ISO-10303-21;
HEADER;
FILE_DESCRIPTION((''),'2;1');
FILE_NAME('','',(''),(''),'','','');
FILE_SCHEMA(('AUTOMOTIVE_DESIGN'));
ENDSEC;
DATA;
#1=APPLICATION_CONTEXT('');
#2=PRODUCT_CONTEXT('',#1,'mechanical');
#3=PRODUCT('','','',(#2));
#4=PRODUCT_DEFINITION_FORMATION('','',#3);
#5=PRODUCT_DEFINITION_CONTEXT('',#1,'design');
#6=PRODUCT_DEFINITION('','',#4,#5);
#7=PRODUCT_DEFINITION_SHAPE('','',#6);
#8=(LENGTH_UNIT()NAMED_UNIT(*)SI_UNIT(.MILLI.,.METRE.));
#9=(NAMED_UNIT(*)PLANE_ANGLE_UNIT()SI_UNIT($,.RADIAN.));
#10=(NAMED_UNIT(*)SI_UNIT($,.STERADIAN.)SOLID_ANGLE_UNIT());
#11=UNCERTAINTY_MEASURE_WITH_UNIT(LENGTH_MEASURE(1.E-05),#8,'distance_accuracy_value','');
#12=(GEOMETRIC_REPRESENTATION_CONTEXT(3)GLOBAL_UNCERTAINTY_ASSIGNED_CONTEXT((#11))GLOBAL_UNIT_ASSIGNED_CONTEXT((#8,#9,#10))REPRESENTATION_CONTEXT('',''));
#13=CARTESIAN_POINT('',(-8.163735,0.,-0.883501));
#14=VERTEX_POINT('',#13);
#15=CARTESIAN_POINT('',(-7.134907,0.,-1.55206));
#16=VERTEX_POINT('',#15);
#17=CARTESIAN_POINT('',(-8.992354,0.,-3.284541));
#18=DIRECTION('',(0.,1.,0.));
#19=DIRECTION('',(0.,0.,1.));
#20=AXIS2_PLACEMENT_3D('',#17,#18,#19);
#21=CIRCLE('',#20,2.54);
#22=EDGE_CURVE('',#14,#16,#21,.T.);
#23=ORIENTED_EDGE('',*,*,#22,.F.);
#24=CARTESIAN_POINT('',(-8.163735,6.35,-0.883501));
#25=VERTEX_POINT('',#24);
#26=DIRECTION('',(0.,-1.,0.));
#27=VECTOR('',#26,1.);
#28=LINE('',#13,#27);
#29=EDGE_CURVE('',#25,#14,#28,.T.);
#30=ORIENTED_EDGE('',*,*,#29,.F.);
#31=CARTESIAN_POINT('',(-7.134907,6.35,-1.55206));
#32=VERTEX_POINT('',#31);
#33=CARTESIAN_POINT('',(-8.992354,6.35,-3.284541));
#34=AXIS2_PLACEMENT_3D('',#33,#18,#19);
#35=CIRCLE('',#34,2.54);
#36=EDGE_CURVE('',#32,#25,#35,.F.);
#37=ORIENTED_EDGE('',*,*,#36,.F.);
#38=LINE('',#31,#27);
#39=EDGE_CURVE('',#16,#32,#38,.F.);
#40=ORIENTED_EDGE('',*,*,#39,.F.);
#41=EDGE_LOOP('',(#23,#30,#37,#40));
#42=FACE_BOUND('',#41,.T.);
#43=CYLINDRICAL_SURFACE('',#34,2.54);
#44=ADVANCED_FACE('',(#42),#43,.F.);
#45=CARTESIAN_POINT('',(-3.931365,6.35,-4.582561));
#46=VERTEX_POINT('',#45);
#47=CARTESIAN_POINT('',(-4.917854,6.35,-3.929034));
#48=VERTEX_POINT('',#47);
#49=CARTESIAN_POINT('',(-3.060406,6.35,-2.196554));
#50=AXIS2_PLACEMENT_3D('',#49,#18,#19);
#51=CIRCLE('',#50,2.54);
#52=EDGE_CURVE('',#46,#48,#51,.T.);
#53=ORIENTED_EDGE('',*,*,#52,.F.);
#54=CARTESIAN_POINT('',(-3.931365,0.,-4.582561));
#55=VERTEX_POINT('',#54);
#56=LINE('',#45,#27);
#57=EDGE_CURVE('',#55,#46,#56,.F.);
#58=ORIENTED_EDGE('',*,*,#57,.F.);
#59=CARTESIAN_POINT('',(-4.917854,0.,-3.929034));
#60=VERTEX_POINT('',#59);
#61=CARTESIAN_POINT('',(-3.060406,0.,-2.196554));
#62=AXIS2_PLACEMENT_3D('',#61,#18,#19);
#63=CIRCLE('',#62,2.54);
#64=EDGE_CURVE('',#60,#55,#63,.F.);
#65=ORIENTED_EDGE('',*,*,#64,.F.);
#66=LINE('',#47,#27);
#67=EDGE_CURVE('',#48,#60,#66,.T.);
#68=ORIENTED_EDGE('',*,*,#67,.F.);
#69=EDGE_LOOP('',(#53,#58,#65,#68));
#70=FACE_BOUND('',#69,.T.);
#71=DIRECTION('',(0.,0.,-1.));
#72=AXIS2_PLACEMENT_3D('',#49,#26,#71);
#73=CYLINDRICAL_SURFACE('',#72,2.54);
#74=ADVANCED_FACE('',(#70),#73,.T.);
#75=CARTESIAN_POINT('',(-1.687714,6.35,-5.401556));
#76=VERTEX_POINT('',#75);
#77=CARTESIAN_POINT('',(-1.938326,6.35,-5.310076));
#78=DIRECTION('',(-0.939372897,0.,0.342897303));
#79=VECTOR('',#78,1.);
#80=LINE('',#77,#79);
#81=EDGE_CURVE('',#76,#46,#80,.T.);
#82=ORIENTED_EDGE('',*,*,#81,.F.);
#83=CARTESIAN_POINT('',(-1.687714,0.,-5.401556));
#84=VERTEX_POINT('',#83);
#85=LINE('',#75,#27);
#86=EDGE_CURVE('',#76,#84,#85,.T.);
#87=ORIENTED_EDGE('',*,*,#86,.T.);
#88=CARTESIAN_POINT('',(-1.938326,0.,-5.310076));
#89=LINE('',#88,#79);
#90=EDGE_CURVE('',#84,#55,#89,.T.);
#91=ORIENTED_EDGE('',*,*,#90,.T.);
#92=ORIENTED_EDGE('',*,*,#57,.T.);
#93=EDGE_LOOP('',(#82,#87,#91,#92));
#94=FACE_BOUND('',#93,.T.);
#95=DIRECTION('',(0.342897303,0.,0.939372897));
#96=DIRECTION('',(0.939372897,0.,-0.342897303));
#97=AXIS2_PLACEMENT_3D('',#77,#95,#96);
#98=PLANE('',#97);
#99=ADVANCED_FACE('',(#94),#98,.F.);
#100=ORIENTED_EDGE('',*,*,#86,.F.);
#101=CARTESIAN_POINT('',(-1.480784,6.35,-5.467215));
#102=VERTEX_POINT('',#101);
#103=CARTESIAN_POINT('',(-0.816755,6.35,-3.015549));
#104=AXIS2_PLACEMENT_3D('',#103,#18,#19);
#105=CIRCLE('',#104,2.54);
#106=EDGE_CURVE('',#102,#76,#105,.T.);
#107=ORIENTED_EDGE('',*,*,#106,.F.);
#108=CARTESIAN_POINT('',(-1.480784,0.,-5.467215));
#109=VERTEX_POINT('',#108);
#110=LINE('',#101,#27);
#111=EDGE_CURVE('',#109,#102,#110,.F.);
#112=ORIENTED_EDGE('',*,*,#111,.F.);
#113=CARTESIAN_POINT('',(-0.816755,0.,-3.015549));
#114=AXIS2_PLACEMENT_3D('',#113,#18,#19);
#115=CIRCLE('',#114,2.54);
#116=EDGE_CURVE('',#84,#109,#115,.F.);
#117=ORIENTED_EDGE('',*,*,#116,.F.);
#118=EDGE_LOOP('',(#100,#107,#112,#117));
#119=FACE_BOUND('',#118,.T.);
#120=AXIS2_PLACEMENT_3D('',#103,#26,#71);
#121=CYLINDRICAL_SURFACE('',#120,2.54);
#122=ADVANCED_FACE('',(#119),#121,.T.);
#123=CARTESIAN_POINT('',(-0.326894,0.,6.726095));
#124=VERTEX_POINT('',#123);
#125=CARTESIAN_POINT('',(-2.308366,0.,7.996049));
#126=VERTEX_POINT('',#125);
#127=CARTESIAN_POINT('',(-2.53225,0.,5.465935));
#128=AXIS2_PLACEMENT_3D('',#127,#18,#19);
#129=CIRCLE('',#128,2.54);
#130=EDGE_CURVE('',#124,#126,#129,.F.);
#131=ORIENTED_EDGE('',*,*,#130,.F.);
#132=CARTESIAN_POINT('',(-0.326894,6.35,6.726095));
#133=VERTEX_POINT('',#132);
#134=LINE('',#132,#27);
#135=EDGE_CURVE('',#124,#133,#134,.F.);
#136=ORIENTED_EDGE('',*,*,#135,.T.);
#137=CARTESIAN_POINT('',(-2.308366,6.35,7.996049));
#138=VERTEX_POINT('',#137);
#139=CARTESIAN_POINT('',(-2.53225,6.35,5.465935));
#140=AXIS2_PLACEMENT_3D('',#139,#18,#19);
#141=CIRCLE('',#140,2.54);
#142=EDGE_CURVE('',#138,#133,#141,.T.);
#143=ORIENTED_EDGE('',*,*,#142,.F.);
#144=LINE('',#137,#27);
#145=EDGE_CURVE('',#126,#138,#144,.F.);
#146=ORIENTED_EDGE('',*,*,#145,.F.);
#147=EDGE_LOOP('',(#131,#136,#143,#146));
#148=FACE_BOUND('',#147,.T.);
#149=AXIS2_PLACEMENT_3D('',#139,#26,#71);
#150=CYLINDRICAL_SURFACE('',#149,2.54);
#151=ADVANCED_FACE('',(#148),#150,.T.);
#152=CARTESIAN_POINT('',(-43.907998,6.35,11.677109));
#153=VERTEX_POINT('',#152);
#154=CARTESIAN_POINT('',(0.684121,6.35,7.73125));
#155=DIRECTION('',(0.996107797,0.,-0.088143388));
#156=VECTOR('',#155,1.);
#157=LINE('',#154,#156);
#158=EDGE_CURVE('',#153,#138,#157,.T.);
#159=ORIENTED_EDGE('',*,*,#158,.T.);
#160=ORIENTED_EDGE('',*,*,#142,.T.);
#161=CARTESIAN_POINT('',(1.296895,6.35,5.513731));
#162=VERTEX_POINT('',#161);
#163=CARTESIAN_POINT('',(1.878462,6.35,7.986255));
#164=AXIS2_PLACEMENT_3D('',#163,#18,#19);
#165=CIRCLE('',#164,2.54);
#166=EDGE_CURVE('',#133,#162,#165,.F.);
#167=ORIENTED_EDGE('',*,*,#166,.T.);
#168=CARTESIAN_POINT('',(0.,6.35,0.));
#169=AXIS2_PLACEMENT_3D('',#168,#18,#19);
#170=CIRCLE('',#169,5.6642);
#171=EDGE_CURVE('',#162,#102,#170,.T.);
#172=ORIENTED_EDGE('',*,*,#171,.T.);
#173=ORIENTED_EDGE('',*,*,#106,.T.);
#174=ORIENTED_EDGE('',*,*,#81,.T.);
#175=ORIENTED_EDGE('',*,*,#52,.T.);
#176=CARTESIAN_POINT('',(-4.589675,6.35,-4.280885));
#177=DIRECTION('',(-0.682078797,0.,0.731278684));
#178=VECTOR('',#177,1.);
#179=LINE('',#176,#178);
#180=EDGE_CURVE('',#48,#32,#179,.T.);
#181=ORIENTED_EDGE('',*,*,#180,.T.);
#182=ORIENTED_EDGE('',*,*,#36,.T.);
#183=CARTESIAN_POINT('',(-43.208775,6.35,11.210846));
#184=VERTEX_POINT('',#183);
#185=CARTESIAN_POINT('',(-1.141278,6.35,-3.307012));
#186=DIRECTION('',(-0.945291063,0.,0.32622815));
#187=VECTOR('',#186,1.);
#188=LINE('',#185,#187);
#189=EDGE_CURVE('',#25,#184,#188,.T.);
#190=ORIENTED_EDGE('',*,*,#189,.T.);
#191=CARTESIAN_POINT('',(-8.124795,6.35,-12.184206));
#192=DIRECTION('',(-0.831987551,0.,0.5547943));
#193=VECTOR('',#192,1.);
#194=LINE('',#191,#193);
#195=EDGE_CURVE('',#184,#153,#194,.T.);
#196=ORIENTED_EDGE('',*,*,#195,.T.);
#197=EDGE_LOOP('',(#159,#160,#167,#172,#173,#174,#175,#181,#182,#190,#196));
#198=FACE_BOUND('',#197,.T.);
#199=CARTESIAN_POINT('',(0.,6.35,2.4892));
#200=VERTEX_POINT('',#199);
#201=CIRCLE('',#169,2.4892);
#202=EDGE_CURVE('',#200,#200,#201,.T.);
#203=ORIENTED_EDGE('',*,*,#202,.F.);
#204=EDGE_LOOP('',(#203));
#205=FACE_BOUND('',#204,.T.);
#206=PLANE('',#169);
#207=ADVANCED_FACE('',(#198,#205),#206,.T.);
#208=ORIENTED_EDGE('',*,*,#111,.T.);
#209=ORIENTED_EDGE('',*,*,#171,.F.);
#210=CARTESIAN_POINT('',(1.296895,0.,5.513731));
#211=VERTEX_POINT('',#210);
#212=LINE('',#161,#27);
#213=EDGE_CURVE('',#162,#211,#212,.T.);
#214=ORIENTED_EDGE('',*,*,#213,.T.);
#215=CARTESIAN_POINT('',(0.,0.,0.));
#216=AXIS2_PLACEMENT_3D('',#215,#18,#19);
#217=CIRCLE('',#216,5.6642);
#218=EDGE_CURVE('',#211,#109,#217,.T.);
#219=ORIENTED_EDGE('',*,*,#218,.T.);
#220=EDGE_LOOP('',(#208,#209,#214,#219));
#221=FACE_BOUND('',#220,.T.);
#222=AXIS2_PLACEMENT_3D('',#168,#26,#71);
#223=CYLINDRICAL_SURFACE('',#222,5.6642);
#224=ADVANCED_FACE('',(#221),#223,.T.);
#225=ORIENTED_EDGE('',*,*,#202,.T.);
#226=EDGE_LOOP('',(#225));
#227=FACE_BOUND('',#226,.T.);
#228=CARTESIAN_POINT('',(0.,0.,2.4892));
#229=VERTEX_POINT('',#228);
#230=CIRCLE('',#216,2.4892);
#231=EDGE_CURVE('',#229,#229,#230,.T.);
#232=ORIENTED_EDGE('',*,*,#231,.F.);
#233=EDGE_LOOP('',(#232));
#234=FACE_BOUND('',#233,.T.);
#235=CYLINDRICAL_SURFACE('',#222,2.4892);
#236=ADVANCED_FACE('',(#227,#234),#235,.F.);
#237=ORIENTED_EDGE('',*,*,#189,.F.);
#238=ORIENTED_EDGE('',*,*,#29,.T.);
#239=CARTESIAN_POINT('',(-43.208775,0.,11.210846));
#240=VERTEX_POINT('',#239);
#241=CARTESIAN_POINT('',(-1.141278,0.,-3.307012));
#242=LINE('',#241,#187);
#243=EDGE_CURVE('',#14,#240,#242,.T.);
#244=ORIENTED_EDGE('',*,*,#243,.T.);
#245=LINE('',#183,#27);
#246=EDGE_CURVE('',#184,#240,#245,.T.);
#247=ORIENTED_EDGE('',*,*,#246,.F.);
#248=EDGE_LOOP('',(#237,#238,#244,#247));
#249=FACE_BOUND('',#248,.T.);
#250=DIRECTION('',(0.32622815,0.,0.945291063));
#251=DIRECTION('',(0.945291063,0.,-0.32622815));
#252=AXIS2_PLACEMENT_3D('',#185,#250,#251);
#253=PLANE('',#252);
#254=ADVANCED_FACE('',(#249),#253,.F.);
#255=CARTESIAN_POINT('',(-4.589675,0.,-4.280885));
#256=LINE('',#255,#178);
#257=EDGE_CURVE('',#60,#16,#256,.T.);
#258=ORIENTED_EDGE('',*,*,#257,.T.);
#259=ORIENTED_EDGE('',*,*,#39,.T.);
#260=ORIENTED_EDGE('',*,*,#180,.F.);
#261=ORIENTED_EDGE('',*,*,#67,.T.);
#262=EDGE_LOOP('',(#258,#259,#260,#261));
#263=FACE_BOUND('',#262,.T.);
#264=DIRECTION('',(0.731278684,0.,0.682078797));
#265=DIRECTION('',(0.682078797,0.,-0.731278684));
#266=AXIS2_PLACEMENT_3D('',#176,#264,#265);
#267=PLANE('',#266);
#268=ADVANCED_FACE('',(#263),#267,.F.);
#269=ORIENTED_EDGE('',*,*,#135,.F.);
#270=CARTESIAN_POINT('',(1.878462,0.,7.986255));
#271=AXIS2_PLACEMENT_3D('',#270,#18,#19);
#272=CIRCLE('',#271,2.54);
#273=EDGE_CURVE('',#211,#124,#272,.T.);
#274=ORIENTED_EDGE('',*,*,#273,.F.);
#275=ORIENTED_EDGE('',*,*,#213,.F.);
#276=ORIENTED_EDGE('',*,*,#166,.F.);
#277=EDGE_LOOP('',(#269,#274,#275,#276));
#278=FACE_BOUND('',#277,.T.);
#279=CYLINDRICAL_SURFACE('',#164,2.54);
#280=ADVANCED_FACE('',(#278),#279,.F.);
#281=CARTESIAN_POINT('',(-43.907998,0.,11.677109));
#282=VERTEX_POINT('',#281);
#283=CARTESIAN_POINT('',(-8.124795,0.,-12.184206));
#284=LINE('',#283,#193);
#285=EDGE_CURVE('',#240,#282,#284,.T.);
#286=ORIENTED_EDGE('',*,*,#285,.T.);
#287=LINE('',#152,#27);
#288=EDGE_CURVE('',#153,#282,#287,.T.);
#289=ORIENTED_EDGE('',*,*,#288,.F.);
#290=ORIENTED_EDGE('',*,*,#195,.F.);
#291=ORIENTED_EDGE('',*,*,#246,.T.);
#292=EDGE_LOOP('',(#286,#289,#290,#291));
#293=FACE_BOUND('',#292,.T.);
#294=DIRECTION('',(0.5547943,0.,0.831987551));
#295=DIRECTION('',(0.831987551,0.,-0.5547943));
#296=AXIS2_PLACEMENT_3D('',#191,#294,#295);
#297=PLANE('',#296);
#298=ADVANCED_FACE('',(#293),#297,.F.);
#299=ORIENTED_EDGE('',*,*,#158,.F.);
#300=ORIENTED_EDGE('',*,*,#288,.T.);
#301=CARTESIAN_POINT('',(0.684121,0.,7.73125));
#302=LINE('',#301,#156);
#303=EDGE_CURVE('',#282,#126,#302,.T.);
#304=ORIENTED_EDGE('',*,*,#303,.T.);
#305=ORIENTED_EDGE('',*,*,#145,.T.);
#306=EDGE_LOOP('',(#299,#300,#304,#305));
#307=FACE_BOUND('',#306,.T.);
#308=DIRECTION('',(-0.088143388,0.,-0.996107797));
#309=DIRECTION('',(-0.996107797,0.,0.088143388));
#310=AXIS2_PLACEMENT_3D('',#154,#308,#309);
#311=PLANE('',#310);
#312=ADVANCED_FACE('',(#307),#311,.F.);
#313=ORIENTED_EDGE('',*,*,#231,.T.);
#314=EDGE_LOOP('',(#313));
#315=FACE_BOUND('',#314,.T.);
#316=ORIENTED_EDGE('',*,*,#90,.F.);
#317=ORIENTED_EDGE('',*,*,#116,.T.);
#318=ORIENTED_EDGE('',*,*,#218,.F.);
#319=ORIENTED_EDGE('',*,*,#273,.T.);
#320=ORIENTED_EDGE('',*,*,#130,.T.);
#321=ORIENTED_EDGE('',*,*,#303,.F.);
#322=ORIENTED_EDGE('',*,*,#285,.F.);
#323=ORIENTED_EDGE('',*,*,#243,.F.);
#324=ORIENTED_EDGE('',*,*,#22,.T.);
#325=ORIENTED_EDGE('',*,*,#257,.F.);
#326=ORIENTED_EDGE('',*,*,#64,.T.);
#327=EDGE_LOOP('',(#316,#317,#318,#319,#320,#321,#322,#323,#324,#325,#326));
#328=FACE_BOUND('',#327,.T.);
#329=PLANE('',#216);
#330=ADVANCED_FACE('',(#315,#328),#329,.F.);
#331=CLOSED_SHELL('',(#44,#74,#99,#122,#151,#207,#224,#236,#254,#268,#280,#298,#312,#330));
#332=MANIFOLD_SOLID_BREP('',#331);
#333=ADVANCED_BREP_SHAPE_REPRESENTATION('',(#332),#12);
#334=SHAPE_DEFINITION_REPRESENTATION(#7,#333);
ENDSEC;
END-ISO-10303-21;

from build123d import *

# Parameters (mm, degrees)
SKETCH1_R           = 2.4892
BOSS_EXTRUDE1_DEPTH = 6.35
FILLET1_R           = 2.54
FILLET2_R           = 2.54


with BuildPart() as part:
    # Sketch1 → Boss-Extrude1 (new body)
    with BuildSketch(Plane(origin=(0, 0, 0), x_dir=(1, 0, 0), z_dir=(0, 1, 0))):
        with BuildLine():
            Line((-1.600744285, 5.433302805), (-4.502878037, 4.373943057))
            Line((-4.502878037, 4.373943057), (-7.566118931, 1.089743665))
            Line((-7.566118931, 1.089743665), (-43.208775226, -11.210846355))
            Line((-43.208775226, -11.210846355), (-43.907997659, -11.677108885))
            Line((-43.907997659, -11.677108885), (0, -7.791786745))
            Line((0, -7.791786745), (0, -5.6642))
            ThreePointArc((0, -5.6642), (5.606178529, 0.808655641), (-1.600744285, 5.433302805))
        make_face()
        with Locations(Location((0, 0, 0), (0, 0, 270))):
            Circle(SKETCH1_R, mode=Mode.SUBTRACT)
    extrude(amount=BOSS_EXTRUDE1_DEPTH)

    # Fillet1
    # the kernel refuses this fillet: 2.54 mm, written as the material it adds along each edge
    with BuildSketch(Plane(origin=(-7.566118931, 0, -1.089743665), x_dir=(0.6820787973115132, 0, -0.7312786844001947), z_dir=(0, 1, 0))) as fillet1_piece_1:
        with BuildLine():
            CenterArc((FILLET1_R * 0.248898879334, FILLET1_R), FILLET1_R, 242.04630063, 27.95369937)
            Line((-FILLET1_R * 0.219859021674, FILLET1_R * 0.11667331624), (0, 0))
            Line((0, 0), (FILLET1_R * 0.248898879334, 0))
        make_face()
    extrude(amount=6.35)
    # the kernel refuses this fillet: 2.54 mm, written as the material it takes off along each edge
    with BuildSketch(Plane(origin=(0, -5.793464316, 7.791786745), x_dir=(0, 0, -1), z_dir=(0, 1, 0))) as fillet1_2_piece_1:
        with BuildLine():
            CenterArc((2.325851575, 2.532250196), FILLET1_R, 185.056806539, 80.466301584)
            Line((-0.204262229, 2.308365991), (0, 0))
            Line((0, 0), (2.127586745, 0))
        make_face()
    extrude(amount=17.936928632, mode=Mode.SUBTRACT)
    with BuildSketch(Plane(origin=(-1.600744285, -0.311653756, -5.433302805), x_dir=(-0.9393728970341759, 0, 0.34289730287306086), z_dir=(0, 1, 0))) as fillet1_2_piece_2:
        with BuildLine():
            CenterArc((0.092583262, 2.54), FILLET1_R, 265.101357171, 4.898642829)
            ThreePointArc((-0.124315777, 0.009277809), (-0.062183413, 0.004296891), (0, 0))
            Line((0, 0), (0.092583262, 0))
        make_face()
    extrude(amount=6.973307511, mode=Mode.SUBTRACT)
    with BuildSketch(Plane(origin=(-4.502878037, -1.520996143, -4.373943057), x_dir=(0.9393728970341768, 0, -0.34289730287305803), z_dir=(0, 1, 0))) as fillet1_2_piece_3:
        with BuildLine():
            CenterArc((FILLET1_R * 0.239526951609, -FILLET1_R), FILLET1_R, 90, 26.940206001)
            Line((-FILLET1_R * 0.213533444751, -FILLET1_R * 0.108520175635), (0, 0))
            Line((0, 0), (FILLET1_R * 0.239526951609, 0))
        make_face()
    extrude(amount=9.391992285, mode=Mode.SUBTRACT)

    # Fillet2
    fillet2_edges = [part.edges().sort_by_distance(p)[0] for p in [
        (0, 3.175, 5.6642),
    ]]
    fillet(fillet2_edges, radius=FILLET2_R)


solid = part.part
